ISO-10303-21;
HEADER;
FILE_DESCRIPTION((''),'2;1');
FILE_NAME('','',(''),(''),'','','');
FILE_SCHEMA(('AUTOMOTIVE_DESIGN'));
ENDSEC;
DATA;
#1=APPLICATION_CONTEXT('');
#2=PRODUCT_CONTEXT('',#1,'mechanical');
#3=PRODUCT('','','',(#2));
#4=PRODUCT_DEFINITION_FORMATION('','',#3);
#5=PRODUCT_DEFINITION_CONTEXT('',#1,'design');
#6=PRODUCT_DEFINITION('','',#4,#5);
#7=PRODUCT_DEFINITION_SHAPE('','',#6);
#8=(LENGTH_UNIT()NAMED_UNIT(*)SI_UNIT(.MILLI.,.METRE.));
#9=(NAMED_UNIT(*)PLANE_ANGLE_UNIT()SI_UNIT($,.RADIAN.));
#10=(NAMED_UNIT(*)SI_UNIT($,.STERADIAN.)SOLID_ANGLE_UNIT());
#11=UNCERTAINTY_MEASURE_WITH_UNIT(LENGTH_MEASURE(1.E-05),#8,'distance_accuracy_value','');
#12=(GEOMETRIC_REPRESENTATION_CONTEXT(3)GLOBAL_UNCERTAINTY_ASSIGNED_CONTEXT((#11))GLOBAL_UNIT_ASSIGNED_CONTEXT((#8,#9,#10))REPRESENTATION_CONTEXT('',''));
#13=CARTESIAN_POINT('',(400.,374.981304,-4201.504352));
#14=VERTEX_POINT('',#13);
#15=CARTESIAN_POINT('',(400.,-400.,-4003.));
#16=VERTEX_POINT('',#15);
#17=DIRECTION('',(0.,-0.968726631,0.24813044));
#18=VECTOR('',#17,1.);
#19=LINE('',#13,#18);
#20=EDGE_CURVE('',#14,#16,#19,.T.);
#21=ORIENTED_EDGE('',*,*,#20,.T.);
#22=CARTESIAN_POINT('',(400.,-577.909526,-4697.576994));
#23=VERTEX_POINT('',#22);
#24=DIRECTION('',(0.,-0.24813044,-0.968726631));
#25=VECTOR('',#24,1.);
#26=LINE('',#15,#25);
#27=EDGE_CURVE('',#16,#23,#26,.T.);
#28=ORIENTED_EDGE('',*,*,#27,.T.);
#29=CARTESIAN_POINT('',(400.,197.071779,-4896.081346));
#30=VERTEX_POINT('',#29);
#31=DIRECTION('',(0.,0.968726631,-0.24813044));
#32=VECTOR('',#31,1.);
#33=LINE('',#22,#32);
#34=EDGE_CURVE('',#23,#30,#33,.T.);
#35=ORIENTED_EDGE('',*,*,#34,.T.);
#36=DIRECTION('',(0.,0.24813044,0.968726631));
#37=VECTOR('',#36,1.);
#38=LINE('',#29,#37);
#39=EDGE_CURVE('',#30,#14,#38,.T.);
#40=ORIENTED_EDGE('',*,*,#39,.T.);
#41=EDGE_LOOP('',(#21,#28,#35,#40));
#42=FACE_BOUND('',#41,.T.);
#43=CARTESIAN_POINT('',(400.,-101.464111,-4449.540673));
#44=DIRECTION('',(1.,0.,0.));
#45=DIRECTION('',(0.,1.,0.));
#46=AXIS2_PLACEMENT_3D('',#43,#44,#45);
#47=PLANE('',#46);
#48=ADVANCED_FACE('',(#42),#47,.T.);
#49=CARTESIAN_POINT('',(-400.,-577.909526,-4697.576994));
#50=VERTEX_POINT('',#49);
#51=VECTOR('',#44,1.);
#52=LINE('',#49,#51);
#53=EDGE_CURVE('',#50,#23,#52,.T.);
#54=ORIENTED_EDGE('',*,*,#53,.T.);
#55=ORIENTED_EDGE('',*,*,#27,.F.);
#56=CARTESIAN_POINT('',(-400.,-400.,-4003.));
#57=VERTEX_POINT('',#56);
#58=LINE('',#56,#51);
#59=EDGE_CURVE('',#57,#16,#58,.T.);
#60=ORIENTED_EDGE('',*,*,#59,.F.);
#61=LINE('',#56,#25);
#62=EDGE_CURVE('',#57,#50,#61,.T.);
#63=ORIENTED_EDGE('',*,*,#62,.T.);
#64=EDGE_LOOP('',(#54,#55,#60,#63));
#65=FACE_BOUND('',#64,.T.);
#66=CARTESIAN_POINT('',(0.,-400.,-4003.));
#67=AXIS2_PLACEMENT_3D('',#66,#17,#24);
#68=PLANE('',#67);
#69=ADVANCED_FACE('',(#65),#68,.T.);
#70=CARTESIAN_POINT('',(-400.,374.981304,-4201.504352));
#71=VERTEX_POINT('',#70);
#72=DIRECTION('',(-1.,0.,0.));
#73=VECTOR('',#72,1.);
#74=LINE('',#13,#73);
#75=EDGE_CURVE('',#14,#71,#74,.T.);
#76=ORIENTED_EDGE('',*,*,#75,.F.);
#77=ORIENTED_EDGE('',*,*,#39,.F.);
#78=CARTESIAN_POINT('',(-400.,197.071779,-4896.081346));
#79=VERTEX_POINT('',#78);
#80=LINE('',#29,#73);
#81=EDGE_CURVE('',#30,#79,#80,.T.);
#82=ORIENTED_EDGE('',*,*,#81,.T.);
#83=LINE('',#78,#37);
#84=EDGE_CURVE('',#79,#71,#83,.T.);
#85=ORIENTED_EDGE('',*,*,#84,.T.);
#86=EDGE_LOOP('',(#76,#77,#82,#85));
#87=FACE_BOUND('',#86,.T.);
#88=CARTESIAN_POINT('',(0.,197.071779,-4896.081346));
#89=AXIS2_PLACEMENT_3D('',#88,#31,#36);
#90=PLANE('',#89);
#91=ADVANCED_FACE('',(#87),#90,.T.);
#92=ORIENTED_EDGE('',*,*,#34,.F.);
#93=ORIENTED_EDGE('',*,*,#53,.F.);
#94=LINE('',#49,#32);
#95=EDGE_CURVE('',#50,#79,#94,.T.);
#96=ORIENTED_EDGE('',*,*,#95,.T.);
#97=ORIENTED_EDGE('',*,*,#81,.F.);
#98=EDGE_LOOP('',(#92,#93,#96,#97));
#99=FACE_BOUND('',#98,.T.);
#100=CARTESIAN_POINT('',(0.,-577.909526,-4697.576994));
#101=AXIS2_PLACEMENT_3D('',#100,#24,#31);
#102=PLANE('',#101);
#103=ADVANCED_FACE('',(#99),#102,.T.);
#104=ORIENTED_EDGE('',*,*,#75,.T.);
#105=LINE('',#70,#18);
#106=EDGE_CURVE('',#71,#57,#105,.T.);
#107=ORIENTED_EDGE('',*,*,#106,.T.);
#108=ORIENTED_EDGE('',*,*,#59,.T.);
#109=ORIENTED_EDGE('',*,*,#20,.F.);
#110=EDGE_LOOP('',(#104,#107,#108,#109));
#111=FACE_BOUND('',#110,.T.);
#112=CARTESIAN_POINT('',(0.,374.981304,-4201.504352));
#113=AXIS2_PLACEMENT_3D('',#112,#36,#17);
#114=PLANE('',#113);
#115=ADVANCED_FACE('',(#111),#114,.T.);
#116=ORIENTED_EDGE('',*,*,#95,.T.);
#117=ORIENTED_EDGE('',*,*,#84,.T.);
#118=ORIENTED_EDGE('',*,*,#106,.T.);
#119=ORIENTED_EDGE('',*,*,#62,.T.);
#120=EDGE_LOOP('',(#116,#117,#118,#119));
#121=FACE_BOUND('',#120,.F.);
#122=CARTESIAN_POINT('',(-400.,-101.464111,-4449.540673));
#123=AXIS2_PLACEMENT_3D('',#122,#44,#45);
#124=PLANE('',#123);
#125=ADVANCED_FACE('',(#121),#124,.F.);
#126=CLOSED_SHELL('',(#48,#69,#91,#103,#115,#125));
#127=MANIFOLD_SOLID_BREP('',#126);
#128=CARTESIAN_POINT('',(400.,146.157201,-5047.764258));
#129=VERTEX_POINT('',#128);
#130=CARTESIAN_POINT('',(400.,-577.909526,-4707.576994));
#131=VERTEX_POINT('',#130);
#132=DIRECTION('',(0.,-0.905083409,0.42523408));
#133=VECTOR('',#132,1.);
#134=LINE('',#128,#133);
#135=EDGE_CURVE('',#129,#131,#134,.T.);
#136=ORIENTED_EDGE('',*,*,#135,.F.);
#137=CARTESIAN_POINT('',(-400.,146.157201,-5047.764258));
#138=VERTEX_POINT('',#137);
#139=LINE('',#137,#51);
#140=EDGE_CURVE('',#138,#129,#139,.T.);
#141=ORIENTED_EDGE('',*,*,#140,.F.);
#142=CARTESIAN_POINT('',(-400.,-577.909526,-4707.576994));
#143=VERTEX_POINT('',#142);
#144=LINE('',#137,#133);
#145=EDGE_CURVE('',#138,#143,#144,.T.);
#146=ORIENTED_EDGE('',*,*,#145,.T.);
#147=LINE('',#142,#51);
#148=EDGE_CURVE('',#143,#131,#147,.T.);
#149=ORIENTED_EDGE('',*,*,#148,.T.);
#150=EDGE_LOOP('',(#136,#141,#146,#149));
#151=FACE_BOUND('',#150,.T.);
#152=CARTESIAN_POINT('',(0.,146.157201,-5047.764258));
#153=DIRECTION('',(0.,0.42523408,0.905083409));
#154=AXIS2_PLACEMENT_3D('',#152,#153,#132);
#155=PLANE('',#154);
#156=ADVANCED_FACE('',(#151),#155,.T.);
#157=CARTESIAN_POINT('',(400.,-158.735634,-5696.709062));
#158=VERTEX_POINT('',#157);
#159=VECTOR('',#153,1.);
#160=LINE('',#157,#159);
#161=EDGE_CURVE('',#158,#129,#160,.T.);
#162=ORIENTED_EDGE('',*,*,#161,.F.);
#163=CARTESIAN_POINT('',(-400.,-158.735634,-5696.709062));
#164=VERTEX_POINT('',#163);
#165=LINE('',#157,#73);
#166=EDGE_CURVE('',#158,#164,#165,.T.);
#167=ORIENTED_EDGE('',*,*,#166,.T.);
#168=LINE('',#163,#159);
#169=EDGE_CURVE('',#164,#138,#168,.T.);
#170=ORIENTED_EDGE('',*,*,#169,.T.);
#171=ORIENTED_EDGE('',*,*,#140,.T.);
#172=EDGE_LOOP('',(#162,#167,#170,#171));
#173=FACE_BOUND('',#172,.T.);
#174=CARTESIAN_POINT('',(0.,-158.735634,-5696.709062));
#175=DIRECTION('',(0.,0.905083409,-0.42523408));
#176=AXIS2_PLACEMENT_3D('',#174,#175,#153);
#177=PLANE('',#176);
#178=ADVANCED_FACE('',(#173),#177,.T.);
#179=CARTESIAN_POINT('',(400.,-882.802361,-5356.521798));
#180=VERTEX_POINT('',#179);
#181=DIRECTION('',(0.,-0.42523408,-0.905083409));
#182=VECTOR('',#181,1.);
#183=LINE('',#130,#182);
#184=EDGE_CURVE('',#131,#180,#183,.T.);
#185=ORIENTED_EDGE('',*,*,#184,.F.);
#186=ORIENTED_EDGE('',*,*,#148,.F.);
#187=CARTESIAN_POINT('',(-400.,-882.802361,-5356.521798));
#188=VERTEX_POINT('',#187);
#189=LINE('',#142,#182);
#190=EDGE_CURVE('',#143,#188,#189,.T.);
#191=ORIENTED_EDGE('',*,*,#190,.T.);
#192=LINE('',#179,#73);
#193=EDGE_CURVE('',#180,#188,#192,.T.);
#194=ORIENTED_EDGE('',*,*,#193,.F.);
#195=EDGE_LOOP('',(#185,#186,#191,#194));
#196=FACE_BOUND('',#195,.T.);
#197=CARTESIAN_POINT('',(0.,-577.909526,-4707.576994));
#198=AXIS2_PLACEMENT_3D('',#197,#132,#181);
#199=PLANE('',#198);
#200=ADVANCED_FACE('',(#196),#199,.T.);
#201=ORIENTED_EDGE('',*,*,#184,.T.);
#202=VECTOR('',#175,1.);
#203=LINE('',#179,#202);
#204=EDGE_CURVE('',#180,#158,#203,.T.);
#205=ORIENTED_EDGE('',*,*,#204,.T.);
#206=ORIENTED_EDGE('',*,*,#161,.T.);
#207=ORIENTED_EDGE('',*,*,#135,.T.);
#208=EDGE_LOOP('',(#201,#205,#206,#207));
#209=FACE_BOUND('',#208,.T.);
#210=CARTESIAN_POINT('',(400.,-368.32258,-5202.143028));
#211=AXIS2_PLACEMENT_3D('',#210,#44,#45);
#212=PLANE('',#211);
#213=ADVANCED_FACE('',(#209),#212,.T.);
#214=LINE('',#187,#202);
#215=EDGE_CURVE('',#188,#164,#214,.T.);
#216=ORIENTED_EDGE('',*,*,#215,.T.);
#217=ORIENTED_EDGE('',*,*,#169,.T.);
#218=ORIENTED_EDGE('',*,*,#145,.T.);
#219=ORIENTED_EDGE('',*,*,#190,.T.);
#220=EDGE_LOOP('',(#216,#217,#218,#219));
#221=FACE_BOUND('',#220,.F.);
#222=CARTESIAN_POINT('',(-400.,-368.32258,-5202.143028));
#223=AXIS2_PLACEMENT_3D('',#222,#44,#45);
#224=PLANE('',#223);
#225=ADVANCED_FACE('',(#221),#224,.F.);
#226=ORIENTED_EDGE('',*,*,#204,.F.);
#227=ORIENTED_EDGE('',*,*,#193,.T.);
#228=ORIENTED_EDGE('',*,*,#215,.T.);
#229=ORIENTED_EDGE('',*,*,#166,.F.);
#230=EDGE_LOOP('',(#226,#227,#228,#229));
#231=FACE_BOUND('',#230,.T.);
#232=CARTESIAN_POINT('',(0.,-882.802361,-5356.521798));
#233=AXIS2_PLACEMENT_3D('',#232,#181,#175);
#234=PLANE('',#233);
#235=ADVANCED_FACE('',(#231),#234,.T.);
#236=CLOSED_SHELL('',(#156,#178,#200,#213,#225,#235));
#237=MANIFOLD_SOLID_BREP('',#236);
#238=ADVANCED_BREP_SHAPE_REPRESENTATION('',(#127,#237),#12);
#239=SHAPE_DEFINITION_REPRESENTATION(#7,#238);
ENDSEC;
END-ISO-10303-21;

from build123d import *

# Parameters (mm, degrees)
F2_DEPTH = 400


# Not quite as in the source:
# - the program builds the solid bodies; features that only make, move or delete a surface that nothing else refers to are left out


with BuildPart() as f2:
    # F1 (on Right) → F2 (new body, symmetric)
    with BuildSketch(Plane.YZ):
        Polygon((374.981304402, -4201.5043521622), (-400, -4003), (-577.9095256254, -4697.5769940703), (197.0717787767, -4896.0813462325), (286.0265415893, -4548.7928491974), align=None)
    extrude(amount=F2_DEPTH, both=True)


with BuildPart() as f2b:
    # F1 (on Right) → F2, piece 2 (new body, symmetric)
    with BuildSketch(Plane.YZ):
        Polygon((-158.7356341258, -5696.709062444), (-6.28921634, -5372.2366603752), (146.1572014458, -5047.7642583064), (-577.9095256254, -4707.5769940703), (-882.802361197, -5356.5217982079), align=None)
    extrude(amount=F2_DEPTH, both=True)


solid = Compound([f2.part, f2b.part])
